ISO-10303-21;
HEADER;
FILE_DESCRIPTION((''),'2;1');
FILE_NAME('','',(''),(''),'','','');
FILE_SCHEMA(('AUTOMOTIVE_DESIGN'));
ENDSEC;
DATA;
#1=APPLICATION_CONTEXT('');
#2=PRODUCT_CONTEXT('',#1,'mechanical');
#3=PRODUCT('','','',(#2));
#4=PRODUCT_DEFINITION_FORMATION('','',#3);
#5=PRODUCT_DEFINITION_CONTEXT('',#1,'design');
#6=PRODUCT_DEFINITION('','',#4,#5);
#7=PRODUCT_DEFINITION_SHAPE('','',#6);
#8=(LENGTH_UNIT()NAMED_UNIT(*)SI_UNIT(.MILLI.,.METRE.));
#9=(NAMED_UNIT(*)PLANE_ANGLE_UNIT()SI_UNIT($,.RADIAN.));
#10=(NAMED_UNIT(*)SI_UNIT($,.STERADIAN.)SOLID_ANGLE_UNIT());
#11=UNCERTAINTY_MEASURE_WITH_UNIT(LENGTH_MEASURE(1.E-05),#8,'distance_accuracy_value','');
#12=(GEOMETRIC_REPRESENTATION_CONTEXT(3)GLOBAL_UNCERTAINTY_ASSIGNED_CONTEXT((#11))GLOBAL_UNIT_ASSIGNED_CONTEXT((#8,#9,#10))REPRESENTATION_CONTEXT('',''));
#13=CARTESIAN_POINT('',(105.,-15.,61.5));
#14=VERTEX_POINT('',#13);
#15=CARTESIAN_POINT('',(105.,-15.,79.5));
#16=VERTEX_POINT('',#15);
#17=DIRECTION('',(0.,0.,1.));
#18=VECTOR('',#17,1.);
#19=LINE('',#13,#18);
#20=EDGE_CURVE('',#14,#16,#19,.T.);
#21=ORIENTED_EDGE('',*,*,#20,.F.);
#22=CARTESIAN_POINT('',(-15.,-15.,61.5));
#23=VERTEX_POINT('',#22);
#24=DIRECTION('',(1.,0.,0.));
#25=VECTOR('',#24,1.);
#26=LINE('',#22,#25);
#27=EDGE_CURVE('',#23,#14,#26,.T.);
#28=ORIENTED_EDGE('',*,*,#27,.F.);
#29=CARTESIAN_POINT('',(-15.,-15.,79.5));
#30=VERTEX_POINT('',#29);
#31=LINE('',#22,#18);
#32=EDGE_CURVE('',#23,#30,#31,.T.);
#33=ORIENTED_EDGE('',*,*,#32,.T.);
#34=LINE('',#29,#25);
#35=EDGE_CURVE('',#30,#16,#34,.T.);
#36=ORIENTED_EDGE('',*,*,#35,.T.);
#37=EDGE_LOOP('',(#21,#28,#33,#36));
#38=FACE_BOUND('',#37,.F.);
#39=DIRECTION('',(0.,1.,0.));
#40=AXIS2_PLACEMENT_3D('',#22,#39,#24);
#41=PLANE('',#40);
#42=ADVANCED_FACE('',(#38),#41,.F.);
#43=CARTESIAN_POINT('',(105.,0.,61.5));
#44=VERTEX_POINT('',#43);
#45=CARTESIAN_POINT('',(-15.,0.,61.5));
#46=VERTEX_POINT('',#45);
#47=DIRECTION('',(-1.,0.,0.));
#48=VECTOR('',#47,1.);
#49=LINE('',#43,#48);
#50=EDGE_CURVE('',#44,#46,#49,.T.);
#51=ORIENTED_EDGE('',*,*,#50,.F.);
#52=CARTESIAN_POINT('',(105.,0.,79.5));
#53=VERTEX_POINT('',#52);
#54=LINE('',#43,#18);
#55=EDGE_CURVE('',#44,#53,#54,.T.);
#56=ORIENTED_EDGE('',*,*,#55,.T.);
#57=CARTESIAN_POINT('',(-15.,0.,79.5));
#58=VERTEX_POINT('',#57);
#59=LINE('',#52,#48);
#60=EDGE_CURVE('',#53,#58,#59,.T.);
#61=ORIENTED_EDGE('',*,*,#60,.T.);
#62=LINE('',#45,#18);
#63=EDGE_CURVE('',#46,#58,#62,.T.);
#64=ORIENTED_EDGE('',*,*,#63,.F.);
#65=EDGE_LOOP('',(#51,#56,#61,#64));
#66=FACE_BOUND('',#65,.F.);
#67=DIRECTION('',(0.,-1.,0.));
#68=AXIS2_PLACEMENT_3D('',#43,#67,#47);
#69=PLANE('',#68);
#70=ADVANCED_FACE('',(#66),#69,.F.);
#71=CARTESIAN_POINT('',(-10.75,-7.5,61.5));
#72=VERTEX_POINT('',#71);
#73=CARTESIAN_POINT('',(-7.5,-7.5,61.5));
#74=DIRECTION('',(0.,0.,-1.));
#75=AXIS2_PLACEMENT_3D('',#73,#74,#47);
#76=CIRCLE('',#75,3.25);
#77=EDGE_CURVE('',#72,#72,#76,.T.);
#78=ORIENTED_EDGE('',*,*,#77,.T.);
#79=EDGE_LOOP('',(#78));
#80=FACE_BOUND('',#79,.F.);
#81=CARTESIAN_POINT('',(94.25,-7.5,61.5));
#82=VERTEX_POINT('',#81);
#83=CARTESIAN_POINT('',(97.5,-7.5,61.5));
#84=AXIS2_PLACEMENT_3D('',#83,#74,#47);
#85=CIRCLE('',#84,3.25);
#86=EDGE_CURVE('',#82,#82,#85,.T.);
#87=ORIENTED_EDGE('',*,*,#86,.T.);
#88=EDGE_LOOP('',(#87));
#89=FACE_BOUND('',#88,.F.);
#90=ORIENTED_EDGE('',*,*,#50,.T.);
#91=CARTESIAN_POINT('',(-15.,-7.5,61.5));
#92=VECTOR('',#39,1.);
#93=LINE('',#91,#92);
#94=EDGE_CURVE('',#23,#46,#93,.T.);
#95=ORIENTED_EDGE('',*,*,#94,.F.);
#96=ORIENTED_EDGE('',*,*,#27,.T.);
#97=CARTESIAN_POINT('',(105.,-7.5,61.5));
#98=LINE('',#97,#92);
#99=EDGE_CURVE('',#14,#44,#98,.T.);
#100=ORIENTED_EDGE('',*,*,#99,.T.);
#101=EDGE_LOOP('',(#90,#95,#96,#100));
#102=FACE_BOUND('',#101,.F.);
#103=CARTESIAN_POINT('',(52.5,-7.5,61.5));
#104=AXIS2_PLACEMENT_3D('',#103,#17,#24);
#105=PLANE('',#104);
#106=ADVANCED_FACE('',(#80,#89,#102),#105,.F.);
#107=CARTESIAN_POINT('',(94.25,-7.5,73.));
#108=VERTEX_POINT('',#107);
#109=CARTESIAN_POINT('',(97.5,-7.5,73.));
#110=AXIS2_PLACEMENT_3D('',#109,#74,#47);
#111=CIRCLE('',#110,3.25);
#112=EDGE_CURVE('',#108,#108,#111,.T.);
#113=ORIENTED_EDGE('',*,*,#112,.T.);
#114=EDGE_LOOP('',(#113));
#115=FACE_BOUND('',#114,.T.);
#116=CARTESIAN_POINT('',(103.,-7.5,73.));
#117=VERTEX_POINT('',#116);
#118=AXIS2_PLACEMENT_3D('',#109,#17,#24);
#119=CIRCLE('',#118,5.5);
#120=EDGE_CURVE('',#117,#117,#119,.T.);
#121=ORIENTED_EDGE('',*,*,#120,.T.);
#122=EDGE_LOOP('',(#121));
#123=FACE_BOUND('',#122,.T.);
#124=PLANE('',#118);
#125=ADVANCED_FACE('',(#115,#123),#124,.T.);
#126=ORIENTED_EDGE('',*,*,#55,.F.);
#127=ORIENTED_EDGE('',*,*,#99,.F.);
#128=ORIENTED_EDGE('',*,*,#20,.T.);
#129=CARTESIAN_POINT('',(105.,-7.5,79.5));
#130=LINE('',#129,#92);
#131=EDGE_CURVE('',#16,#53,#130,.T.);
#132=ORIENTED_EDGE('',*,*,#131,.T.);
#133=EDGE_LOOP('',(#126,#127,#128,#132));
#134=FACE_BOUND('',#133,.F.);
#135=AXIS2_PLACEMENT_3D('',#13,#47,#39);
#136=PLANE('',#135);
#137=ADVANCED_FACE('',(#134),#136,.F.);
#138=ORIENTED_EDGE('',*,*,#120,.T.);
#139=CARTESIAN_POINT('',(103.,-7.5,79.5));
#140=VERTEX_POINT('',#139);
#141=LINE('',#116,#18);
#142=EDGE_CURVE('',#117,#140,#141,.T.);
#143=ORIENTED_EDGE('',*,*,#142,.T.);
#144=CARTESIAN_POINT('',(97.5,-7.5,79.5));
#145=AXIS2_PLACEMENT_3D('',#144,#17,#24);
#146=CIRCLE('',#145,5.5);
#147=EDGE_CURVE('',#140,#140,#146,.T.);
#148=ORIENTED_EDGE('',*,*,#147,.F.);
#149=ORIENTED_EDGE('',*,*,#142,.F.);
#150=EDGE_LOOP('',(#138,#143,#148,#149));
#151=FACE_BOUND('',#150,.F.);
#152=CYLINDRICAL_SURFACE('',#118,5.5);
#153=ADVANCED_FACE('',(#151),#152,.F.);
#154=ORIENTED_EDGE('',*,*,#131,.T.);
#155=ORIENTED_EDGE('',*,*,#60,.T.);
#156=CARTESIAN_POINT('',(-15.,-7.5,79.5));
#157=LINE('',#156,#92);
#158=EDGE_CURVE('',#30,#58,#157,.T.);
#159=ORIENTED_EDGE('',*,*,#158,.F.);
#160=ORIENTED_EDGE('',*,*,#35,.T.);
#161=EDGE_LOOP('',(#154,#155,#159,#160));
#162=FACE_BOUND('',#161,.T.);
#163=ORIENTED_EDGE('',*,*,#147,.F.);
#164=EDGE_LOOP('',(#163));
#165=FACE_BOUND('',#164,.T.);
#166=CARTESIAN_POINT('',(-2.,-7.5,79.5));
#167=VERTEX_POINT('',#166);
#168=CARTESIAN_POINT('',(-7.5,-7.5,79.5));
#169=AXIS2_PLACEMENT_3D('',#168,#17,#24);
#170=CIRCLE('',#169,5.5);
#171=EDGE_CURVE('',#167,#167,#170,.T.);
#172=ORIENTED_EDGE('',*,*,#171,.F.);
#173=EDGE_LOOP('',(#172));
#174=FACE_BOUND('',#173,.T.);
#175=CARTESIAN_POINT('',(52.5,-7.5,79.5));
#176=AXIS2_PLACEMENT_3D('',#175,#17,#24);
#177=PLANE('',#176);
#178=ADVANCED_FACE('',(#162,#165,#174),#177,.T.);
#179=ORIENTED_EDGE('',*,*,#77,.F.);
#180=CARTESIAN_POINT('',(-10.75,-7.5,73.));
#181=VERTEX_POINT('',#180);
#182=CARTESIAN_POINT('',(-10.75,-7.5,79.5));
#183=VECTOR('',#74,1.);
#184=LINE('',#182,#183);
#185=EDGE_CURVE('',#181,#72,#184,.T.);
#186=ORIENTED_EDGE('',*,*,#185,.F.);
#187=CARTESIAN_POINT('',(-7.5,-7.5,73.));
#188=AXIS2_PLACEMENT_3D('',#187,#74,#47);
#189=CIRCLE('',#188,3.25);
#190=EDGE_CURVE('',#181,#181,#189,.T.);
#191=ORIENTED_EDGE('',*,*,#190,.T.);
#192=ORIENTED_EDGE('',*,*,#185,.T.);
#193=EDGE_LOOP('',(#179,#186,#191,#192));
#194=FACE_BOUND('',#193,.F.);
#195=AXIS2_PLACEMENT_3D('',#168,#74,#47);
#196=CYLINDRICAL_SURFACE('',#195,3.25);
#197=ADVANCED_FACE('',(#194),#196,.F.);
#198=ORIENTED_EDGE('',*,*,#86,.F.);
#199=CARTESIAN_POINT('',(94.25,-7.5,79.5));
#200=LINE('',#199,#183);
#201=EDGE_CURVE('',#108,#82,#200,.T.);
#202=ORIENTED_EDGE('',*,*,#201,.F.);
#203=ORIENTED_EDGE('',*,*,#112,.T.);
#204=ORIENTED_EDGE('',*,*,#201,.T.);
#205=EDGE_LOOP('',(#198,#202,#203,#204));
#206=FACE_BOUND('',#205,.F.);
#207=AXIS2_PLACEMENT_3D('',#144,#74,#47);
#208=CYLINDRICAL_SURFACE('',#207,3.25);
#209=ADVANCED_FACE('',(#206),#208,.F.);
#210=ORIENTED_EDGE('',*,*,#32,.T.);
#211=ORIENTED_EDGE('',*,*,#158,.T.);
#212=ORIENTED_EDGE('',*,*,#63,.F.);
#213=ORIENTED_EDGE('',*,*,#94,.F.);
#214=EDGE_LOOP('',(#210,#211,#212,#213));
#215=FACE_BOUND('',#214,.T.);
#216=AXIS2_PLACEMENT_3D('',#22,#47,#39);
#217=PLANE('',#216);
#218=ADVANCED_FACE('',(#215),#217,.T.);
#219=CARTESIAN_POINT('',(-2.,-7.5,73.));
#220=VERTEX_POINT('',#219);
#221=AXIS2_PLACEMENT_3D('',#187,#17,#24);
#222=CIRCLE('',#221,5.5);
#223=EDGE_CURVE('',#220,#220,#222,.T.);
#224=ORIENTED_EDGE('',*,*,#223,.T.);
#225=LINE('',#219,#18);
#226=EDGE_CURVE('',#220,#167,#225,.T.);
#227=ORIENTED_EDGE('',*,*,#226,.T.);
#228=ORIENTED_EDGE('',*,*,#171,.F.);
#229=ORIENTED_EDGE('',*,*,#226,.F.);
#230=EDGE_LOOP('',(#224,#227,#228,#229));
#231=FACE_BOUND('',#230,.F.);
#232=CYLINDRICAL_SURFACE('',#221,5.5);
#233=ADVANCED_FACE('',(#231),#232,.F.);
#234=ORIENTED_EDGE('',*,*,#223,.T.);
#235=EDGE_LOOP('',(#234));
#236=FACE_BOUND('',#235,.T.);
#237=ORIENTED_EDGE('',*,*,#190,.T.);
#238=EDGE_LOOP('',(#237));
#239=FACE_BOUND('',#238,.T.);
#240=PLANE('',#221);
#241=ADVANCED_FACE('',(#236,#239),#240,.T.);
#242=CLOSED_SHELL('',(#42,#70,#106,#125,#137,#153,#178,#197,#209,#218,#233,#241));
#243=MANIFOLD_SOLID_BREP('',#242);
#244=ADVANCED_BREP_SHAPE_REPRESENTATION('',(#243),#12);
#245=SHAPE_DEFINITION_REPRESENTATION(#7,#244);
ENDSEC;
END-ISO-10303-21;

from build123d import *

# Parameters (mm, degrees)
F1_DEPTH         = 15
F2_W             = 74
F2_H             = 5
F3_DEPTH         = 15
F4_R             = 4.99999
F5_R             = 8
F8_D             = 7
F11_D            = 5
F11_DEPTH        = 20
F11_TIP          = 1.5021515476
F11_ON_F10_D     = 5
F11_ON_F10_DEPTH = 20
F11_ON_F10_TIP   = 1.5021515476
F12_W            = 105
F12_H            = 15
F12_W_2          = 15
F12_R            = 2.5
F13_DEPTH        = 18
F16_D            = 6.5
F16_CBORE_D      = 11
F16_CBORE_DEPTH  = 6.5


# Not quite as in the source:
# - a fillet or chamfer is up to 0.001 mm smaller than in the source, because OpenCascade refuses the exact size
# - a feature of the source that left no trace in its solid (it failed there, or was rolled back) is left out


with BuildPart() as f1:
    # F0 (on Front) → F1 (new body)
    with BuildSketch(Plane.XZ):
        Polygon((90, 0), (0, 0), (0, 61.5), (-15, 61.5), (-15, -15), (105, -15), (105, 61.5), (90, 61.5), align=None)
    extrude(amount=F1_DEPTH)

    # F2 (on face) → F3 (join, through all)
    with BuildSketch(Plane.XZ.offset(15)):
        with Locations((45, -17.5)):
            Rectangle(F2_W, F2_H)
    extrude(amount=-F3_DEPTH)

    # F4 (radius 5 in the source; OpenCascade refuses exactly that, so slightly less here)
    f4_edges = [f1.edges().sort_by_distance(p)[0] for p in [
        (0, -7.5, 0),
        (90, -7.5, 0),
        (8, -7.5, -15),
        (82, -7.5, -15),
    ]]
    fillet(f4_edges, radius=F4_R)

    # F5
    f5_edges = [f1.edges().sort_by_distance(p)[0] for p in [
        (-15, -7.5, -15),
        (105, -7.5, -15),
    ]]
    fillet(f5_edges, radius=F5_R)

    # F8 (through all)
    with Locations(Plane.XZ.offset(15)):
        with Locations((19.6, -10), (70.4, -10)):
            Hole(F8_D / 2)

    # F11
    with Locations(Plane.XY.offset(61.5)):
        with Locations((-7.5, -7.5)):
            Hole(F11_D / 2, depth=F11_DEPTH)
            with Locations((0, 0, -(F11_DEPTH + F11_TIP / 2))):  # 118° drill point
                Cone(0, F11_D / 2, F11_TIP, mode=Mode.SUBTRACT)

    # F11 on F10
    with Locations(Plane.XY.offset(61.5)):
        with Locations((97.5, -7.5)):
            Hole(F11_ON_F10_D / 2, depth=F11_ON_F10_DEPTH)
            with Locations((0, 0, -(F11_ON_F10_DEPTH + F11_ON_F10_TIP / 2))):  # 118° drill point
                Cone(0, F11_ON_F10_D / 2, F11_ON_F10_TIP, mode=Mode.SUBTRACT)


with BuildPart() as f13:
    # F12 (on face) → F13 (new body)
    with BuildSketch(Plane.XY.offset(61.5)):
        with Locations((52.5, -7.5)):
            Rectangle(F12_W, F12_H)
        with Locations((-7.5, -7.5)):
            Rectangle(F12_W_2, F12_H)
        with Locations((-7.5, -7.5)):
            Circle(F12_R, mode=Mode.SUBTRACT)
    extrude(amount=F13_DEPTH)

    # F16 (through all)
    with Locations(Plane.XY.offset(79.5)):
        with Locations((-7.5, -7.5), (97.5, -7.5)):
            CounterBoreHole(F16_D / 2, F16_CBORE_D / 2, F16_CBORE_DEPTH)


solid = f13.part
